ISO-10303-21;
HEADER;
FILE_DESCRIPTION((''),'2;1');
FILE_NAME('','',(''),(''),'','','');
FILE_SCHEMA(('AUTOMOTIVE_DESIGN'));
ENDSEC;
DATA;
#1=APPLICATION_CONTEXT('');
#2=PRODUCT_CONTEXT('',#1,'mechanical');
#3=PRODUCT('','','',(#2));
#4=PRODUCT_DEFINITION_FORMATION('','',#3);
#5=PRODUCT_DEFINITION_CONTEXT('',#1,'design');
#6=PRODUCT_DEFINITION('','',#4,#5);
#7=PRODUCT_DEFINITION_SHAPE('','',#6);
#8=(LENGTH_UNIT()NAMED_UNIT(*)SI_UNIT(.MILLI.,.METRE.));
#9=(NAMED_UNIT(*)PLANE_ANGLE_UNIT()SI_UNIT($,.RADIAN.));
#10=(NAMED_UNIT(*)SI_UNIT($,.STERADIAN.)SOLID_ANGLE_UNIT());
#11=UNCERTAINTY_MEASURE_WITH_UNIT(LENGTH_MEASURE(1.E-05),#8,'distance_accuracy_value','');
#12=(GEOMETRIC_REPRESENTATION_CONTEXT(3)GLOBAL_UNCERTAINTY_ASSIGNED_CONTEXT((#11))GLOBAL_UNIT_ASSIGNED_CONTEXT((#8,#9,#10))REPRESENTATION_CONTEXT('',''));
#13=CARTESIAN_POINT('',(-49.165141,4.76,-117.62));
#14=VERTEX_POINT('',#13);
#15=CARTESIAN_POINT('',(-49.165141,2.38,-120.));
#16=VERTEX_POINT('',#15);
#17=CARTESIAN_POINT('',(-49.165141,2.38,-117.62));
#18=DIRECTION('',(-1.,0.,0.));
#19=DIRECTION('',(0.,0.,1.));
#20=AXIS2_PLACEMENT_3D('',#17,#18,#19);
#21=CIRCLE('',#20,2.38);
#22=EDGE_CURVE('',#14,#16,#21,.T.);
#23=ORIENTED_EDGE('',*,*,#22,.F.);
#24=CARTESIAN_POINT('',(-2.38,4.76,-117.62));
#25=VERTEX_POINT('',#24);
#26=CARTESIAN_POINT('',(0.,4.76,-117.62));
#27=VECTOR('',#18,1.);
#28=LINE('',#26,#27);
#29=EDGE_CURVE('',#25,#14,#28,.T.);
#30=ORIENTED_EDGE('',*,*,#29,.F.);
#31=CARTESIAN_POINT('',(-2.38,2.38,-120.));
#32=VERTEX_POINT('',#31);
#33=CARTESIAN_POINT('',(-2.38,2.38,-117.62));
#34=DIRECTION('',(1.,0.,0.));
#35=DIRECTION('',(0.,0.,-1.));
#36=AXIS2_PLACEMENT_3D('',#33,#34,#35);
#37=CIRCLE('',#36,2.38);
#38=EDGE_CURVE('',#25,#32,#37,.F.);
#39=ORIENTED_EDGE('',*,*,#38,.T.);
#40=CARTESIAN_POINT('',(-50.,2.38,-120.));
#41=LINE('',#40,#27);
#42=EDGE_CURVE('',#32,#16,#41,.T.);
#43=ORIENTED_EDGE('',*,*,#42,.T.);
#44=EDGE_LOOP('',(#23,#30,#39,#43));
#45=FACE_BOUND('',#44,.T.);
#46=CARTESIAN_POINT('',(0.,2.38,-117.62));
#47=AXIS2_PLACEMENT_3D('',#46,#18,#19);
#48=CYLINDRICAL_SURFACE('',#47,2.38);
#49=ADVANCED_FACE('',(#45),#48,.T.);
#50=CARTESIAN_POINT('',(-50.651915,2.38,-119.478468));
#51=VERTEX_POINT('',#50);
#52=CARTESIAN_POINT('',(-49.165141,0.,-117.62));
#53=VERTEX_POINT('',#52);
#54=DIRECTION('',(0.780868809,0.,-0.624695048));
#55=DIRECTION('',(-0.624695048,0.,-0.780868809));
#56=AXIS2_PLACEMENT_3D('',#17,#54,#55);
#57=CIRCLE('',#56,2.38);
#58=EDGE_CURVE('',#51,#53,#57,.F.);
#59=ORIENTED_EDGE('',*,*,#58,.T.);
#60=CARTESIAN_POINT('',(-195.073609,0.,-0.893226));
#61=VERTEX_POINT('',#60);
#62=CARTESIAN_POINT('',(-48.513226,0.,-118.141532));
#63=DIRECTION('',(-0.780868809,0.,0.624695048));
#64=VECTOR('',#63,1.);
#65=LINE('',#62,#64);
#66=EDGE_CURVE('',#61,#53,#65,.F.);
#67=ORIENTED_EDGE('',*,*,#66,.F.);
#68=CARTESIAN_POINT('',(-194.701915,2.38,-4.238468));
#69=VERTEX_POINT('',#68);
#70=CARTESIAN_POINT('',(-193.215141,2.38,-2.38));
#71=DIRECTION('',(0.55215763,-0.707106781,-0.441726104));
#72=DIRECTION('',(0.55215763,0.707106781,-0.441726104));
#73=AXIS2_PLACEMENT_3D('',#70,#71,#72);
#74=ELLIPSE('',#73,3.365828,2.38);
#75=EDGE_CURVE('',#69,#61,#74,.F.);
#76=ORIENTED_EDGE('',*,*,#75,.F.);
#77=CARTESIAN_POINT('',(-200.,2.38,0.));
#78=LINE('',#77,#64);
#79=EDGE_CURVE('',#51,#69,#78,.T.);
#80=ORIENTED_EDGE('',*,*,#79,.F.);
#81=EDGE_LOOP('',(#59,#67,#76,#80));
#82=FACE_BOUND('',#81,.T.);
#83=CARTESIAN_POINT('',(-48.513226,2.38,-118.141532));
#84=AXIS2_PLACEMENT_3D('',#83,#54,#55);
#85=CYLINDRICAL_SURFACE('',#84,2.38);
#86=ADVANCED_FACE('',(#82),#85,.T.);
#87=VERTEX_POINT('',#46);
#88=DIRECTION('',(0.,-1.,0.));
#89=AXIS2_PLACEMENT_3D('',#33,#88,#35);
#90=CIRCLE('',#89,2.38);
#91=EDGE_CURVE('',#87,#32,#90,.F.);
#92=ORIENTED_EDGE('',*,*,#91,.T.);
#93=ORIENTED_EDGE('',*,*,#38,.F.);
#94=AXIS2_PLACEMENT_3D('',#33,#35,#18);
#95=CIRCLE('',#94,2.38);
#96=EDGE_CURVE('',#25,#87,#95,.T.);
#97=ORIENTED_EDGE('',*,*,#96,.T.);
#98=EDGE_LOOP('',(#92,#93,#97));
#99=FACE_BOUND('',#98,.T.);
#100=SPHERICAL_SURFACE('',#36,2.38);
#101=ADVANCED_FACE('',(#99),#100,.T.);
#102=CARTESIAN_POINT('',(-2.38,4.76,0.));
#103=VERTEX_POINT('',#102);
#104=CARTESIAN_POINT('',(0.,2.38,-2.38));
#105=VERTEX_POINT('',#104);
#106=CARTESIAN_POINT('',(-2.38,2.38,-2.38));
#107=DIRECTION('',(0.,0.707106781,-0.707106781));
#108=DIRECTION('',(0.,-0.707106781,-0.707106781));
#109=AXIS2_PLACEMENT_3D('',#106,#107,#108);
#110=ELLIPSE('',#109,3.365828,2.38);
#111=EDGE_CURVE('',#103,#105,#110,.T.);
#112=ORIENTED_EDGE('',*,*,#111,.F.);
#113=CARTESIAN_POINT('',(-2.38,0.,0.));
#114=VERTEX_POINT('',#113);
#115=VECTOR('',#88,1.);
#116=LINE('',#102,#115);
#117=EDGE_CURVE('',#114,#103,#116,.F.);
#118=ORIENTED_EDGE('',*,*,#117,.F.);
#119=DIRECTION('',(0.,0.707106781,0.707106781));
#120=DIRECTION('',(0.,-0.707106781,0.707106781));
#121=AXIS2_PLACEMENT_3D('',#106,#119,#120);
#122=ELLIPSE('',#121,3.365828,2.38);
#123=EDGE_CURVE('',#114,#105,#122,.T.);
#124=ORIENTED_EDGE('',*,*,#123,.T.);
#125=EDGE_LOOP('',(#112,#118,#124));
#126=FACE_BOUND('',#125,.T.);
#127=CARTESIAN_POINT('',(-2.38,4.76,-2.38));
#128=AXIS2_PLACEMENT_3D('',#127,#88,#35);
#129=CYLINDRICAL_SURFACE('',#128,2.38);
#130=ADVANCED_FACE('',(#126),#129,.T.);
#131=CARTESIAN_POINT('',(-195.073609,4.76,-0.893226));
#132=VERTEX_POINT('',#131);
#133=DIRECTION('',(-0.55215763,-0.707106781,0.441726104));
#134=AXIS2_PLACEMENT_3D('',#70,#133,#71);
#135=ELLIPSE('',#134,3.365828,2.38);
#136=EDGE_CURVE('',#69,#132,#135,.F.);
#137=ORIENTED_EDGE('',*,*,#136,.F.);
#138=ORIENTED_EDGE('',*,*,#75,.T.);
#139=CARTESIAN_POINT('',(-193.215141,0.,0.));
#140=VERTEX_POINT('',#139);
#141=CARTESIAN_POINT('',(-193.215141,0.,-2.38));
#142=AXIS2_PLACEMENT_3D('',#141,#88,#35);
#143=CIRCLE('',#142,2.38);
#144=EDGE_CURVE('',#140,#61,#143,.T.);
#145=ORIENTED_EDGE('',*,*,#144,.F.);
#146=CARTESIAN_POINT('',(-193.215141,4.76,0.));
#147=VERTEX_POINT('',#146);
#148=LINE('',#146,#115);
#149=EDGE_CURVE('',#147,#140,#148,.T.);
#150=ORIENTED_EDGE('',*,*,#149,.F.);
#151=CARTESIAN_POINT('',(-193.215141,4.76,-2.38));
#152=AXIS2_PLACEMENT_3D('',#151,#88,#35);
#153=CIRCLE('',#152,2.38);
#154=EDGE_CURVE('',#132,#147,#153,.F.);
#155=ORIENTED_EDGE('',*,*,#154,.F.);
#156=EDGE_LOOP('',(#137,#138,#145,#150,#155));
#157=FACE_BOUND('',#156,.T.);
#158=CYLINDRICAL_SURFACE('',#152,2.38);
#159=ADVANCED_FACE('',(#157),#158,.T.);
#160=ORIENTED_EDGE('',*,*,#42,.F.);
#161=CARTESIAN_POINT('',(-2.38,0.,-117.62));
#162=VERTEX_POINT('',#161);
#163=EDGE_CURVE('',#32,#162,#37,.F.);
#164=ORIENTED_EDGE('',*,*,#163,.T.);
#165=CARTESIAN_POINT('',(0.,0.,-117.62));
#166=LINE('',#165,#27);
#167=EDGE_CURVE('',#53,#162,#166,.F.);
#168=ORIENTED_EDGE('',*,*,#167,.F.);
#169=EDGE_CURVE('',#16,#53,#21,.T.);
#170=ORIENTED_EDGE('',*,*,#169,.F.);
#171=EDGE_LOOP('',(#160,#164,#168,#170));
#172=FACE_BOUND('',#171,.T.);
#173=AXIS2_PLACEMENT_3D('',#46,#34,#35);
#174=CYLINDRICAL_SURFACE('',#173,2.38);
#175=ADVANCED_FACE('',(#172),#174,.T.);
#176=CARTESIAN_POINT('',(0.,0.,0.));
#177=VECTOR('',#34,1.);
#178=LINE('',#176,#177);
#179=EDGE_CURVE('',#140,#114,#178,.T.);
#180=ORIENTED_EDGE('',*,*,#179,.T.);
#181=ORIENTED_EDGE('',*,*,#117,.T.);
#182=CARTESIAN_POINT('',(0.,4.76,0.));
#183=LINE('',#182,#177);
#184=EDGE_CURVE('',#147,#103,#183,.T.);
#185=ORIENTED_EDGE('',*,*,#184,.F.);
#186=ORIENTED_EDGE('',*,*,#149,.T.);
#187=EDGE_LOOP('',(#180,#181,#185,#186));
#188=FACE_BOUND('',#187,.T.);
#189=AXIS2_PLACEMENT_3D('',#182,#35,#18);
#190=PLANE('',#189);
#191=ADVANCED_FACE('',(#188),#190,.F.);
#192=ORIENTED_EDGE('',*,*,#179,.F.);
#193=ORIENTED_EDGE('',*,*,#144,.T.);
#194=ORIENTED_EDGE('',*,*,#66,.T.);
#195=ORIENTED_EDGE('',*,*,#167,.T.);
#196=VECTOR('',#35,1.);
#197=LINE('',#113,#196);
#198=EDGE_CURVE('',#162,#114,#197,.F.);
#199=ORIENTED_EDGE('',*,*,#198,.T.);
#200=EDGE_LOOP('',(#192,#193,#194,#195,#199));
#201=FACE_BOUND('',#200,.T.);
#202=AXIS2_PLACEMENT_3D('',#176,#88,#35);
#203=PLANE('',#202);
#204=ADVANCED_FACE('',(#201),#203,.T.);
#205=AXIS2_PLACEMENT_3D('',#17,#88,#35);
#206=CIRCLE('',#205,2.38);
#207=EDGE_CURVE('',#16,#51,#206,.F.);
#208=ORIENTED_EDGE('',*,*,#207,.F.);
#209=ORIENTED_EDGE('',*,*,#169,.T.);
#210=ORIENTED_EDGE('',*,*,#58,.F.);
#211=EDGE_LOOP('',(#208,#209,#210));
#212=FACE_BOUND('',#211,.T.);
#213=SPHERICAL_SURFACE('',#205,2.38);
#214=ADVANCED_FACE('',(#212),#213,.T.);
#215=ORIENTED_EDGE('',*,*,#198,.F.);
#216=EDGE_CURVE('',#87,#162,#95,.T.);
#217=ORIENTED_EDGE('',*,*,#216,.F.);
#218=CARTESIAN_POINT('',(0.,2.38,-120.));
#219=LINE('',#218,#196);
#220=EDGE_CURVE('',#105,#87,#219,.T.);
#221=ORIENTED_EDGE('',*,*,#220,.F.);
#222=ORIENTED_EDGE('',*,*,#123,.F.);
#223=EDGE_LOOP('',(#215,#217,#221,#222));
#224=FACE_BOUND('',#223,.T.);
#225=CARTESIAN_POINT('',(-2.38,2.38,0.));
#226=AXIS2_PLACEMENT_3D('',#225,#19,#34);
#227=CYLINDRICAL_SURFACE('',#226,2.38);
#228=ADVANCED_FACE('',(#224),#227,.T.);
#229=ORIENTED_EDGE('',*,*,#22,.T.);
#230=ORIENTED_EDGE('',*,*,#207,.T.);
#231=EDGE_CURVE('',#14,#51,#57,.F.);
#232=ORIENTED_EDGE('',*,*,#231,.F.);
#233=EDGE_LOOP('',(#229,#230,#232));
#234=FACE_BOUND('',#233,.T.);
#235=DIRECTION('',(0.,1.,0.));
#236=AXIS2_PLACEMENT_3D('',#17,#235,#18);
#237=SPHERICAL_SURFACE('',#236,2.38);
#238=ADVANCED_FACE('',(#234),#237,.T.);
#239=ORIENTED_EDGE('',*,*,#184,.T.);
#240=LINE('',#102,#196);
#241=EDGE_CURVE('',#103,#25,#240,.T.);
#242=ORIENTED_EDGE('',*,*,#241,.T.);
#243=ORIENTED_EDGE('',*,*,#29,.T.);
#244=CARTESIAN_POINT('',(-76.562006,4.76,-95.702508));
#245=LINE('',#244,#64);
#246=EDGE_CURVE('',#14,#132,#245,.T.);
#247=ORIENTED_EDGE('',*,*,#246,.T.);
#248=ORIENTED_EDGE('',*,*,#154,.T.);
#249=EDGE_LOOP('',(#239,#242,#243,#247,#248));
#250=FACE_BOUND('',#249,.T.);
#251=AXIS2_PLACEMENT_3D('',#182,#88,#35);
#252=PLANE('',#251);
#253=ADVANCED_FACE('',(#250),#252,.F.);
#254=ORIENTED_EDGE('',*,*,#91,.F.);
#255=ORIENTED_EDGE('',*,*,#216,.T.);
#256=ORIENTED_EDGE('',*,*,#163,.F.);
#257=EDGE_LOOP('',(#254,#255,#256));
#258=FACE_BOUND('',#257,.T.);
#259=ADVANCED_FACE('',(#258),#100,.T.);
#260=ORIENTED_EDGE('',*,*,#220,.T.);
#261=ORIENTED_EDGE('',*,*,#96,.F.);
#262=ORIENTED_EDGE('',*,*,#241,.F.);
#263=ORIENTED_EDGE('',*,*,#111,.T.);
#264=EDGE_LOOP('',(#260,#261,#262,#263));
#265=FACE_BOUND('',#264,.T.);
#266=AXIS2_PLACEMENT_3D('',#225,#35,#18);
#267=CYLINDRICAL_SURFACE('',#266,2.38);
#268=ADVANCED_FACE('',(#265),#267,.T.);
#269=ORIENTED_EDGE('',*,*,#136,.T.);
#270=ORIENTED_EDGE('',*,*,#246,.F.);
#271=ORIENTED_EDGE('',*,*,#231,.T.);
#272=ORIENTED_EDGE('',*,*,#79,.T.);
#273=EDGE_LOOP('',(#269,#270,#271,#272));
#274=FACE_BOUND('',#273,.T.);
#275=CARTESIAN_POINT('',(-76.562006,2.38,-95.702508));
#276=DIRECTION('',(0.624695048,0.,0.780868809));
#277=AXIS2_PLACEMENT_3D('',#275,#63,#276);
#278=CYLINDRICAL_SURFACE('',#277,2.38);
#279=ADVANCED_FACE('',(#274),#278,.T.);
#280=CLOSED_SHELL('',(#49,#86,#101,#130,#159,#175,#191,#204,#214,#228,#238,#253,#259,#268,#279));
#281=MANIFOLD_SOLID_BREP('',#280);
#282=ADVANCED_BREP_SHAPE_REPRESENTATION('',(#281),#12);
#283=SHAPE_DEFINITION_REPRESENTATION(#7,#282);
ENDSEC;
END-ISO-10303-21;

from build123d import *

# Parameters (mm, degrees)
BOSS_EXTRUDE1_DEPTH = 4.76
FILLET3_R           = 2.38


with BuildPart() as part:
    # Sketch1 → Boss-Extrude1 (new body)
    with BuildSketch(Plane(origin=(0, 0, 0), x_dir=(1, 0, 0), z_dir=(0, 1, 0))):
        Polygon((0, 0), (0, 120), (-50, 120), (-200, 0), align=None)
    extrude(amount=BOSS_EXTRUDE1_DEPTH)

    # Fillet3
    fillet3_edges = [part.edges().sort_by_distance(p)[0] for p in [
        (-25, 4.76, -120),
        (-125, 4.76, -60),
        (-125, 0, -60),
        (-25, 0, -120),
        (0, 0, -60),
        (-200, 2.38, 0),
        (-50, 2.38, -120),
        (0, 2.38, -120),
        (0, 2.38, 0),
        (0, 4.76, -60),
    ]]
    fillet(fillet3_edges, radius=FILLET3_R - 0.0001)  # a hair under: the kernel refuses the full size


solid = part.part
